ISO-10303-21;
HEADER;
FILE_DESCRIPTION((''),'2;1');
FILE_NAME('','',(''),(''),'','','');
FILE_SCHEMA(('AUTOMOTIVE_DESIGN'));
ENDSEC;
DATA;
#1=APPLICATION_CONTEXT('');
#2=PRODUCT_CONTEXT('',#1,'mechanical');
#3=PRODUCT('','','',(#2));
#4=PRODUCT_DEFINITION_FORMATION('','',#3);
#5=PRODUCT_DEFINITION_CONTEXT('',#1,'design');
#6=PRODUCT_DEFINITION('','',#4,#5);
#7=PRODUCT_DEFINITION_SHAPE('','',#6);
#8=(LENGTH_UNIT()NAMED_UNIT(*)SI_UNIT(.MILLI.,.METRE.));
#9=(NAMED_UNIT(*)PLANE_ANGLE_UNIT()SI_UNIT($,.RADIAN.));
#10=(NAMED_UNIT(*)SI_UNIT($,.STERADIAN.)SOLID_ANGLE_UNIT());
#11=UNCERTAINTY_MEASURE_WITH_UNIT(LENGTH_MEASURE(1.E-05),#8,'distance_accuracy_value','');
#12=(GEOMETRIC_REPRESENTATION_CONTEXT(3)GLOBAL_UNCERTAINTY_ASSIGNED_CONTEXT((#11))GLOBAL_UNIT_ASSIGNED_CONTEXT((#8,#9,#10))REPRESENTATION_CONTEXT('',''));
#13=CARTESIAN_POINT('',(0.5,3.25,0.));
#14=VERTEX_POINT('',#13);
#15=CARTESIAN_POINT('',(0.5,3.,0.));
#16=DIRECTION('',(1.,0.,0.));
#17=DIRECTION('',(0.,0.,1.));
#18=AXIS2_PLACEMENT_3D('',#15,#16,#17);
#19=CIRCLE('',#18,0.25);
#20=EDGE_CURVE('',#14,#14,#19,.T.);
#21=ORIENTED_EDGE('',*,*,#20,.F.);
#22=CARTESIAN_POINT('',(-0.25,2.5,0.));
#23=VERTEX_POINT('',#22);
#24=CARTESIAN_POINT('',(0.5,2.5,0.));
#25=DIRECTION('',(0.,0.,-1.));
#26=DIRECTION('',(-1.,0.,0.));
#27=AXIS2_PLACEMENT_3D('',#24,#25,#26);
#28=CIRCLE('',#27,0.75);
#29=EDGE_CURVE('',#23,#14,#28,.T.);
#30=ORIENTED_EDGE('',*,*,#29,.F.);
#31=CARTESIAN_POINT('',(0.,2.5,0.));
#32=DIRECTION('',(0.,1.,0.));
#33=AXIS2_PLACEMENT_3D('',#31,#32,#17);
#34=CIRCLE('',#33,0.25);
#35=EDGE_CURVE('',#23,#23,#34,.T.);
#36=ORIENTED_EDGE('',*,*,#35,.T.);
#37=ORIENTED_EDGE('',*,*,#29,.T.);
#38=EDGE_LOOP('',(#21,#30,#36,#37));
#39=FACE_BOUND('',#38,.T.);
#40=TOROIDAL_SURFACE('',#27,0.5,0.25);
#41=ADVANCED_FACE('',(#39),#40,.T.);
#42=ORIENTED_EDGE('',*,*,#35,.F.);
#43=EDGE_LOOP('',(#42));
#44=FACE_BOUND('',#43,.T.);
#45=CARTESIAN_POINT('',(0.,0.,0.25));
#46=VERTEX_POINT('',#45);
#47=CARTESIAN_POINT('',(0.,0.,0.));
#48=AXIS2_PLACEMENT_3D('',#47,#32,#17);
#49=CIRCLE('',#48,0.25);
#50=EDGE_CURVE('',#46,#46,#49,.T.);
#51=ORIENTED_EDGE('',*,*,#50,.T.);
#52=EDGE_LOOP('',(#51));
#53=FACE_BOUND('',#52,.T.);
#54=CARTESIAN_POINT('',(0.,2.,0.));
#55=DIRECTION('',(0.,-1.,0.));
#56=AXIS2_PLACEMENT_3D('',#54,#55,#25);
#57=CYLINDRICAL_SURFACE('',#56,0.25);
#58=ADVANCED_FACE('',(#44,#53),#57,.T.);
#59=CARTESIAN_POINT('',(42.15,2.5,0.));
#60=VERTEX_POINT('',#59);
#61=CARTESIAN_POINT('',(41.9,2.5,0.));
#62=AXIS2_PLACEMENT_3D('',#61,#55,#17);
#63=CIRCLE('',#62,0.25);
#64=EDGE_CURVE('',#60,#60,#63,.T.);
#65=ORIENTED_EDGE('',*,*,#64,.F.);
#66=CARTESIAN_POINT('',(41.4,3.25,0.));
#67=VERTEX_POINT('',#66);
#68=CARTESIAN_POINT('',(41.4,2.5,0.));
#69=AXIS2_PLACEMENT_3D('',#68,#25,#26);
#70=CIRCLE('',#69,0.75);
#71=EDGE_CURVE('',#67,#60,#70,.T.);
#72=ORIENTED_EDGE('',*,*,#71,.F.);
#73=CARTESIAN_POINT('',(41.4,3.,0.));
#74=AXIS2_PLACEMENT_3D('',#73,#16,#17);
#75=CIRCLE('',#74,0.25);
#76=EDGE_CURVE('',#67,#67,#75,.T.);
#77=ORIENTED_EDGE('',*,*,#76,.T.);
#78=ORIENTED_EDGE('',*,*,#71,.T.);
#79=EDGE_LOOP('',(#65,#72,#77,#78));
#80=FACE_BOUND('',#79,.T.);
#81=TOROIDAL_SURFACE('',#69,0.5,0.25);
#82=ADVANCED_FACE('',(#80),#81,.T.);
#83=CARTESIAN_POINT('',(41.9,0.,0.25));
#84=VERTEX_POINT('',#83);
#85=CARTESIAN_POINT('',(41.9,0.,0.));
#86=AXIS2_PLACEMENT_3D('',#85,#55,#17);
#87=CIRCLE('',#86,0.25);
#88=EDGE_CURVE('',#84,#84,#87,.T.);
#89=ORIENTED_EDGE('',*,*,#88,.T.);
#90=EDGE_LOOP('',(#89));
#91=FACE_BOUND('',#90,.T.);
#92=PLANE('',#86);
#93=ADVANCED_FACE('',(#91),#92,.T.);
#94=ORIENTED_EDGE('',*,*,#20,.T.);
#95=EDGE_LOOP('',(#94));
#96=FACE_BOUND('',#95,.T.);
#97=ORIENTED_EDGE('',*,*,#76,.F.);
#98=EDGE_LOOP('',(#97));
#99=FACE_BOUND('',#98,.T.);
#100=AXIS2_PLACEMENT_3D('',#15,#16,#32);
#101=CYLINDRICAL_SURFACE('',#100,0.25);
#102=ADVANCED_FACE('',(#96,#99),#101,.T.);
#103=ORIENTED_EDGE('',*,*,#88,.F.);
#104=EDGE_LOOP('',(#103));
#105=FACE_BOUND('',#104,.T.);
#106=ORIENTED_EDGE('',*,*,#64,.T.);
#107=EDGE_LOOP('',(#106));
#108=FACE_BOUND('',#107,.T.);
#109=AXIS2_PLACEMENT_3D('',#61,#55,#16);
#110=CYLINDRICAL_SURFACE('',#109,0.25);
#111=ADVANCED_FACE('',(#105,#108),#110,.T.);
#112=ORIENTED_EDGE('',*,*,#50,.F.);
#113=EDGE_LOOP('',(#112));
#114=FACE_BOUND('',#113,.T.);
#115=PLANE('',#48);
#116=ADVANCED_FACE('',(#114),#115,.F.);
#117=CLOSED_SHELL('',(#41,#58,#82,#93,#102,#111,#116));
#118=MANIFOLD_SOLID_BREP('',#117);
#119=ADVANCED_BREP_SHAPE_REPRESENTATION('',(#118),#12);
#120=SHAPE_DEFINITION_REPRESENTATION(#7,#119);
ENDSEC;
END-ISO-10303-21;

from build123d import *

# Parameters (mm, degrees)
SKETCH1_R           = 0.25
BOSS_EXTRUDE1_DEPTH = 2
SWEEP1_OUTLINE_R    = 0.25
SWEEP1_DEPTH        = 2.5
SWEEP1_2_OUTLINE_R  = 0.25
SWEEP1_2_ANGLE      = 90
SWEEP1_3_OUTLINE_R  = 0.25
SWEEP1_3_ANGLE      = 90
SWEEP1_START        = 0.4999999
SWEEP1_4_OUTLINE_R  = 0.25
SWEEP1_4_DEPTH      = 40.9000002


with BuildPart() as part:
    # Sketch1 → Boss-Extrude1 (new body)
    with BuildSketch(Plane(origin=(0, 0, 0), x_dir=(1, 0, 0), z_dir=(0, 1, 0))):
        with Locations(Location((0, 0, 0), (0, 0, 270))):
            Circle(SKETCH1_R)
    extrude(amount=BOSS_EXTRUDE1_DEPTH)

    # Sweep1: read off the stored shape, not the designer's step
    # Sweep1 outline → Sweep1 (add)
    with BuildSketch(Plane(origin=(0, 0, 0), x_dir=(1, 0, 0), z_dir=(0, 1, 0))):
        Circle(SWEEP1_OUTLINE_R)
        with Locations((41.9, 0)):
            Circle(SWEEP1_OUTLINE_R)
    extrude(amount=SWEEP1_DEPTH)

    # Sweep1 2 outline → Sweep1 2 (revolve)
    with BuildSketch(Plane(origin=(0.5, 2.5, 0), x_dir=(0, 1, 0), z_dir=(1, 0, 0))):
        with Locations((0.5, 0)):
            Circle(SWEEP1_2_OUTLINE_R)
    revolve(axis=Axis((0.5, 2.5, 0), (0, 0, 1)), revolution_arc=SWEEP1_2_ANGLE)

    # Sweep1 3 outline → Sweep1 3 (revolve)
    with BuildSketch(Plane(origin=(41.4, 2.5, 0), x_dir=(1, 0, 0), z_dir=(0, -1, 0))):
        with Locations((0.5, 0)):
            Circle(SWEEP1_3_OUTLINE_R)
    revolve(axis=Axis((41.4, 2.5, 0), (0, 0, 1)), revolution_arc=SWEEP1_3_ANGLE)

    # Sweep1 4 outline → Sweep1 4 (add)
    with BuildSketch(Plane.YZ.offset(SWEEP1_START)):
        with Locations((3, 0)):
            Circle(SWEEP1_4_OUTLINE_R)
    extrude(amount=SWEEP1_4_DEPTH)


solid = part.part
